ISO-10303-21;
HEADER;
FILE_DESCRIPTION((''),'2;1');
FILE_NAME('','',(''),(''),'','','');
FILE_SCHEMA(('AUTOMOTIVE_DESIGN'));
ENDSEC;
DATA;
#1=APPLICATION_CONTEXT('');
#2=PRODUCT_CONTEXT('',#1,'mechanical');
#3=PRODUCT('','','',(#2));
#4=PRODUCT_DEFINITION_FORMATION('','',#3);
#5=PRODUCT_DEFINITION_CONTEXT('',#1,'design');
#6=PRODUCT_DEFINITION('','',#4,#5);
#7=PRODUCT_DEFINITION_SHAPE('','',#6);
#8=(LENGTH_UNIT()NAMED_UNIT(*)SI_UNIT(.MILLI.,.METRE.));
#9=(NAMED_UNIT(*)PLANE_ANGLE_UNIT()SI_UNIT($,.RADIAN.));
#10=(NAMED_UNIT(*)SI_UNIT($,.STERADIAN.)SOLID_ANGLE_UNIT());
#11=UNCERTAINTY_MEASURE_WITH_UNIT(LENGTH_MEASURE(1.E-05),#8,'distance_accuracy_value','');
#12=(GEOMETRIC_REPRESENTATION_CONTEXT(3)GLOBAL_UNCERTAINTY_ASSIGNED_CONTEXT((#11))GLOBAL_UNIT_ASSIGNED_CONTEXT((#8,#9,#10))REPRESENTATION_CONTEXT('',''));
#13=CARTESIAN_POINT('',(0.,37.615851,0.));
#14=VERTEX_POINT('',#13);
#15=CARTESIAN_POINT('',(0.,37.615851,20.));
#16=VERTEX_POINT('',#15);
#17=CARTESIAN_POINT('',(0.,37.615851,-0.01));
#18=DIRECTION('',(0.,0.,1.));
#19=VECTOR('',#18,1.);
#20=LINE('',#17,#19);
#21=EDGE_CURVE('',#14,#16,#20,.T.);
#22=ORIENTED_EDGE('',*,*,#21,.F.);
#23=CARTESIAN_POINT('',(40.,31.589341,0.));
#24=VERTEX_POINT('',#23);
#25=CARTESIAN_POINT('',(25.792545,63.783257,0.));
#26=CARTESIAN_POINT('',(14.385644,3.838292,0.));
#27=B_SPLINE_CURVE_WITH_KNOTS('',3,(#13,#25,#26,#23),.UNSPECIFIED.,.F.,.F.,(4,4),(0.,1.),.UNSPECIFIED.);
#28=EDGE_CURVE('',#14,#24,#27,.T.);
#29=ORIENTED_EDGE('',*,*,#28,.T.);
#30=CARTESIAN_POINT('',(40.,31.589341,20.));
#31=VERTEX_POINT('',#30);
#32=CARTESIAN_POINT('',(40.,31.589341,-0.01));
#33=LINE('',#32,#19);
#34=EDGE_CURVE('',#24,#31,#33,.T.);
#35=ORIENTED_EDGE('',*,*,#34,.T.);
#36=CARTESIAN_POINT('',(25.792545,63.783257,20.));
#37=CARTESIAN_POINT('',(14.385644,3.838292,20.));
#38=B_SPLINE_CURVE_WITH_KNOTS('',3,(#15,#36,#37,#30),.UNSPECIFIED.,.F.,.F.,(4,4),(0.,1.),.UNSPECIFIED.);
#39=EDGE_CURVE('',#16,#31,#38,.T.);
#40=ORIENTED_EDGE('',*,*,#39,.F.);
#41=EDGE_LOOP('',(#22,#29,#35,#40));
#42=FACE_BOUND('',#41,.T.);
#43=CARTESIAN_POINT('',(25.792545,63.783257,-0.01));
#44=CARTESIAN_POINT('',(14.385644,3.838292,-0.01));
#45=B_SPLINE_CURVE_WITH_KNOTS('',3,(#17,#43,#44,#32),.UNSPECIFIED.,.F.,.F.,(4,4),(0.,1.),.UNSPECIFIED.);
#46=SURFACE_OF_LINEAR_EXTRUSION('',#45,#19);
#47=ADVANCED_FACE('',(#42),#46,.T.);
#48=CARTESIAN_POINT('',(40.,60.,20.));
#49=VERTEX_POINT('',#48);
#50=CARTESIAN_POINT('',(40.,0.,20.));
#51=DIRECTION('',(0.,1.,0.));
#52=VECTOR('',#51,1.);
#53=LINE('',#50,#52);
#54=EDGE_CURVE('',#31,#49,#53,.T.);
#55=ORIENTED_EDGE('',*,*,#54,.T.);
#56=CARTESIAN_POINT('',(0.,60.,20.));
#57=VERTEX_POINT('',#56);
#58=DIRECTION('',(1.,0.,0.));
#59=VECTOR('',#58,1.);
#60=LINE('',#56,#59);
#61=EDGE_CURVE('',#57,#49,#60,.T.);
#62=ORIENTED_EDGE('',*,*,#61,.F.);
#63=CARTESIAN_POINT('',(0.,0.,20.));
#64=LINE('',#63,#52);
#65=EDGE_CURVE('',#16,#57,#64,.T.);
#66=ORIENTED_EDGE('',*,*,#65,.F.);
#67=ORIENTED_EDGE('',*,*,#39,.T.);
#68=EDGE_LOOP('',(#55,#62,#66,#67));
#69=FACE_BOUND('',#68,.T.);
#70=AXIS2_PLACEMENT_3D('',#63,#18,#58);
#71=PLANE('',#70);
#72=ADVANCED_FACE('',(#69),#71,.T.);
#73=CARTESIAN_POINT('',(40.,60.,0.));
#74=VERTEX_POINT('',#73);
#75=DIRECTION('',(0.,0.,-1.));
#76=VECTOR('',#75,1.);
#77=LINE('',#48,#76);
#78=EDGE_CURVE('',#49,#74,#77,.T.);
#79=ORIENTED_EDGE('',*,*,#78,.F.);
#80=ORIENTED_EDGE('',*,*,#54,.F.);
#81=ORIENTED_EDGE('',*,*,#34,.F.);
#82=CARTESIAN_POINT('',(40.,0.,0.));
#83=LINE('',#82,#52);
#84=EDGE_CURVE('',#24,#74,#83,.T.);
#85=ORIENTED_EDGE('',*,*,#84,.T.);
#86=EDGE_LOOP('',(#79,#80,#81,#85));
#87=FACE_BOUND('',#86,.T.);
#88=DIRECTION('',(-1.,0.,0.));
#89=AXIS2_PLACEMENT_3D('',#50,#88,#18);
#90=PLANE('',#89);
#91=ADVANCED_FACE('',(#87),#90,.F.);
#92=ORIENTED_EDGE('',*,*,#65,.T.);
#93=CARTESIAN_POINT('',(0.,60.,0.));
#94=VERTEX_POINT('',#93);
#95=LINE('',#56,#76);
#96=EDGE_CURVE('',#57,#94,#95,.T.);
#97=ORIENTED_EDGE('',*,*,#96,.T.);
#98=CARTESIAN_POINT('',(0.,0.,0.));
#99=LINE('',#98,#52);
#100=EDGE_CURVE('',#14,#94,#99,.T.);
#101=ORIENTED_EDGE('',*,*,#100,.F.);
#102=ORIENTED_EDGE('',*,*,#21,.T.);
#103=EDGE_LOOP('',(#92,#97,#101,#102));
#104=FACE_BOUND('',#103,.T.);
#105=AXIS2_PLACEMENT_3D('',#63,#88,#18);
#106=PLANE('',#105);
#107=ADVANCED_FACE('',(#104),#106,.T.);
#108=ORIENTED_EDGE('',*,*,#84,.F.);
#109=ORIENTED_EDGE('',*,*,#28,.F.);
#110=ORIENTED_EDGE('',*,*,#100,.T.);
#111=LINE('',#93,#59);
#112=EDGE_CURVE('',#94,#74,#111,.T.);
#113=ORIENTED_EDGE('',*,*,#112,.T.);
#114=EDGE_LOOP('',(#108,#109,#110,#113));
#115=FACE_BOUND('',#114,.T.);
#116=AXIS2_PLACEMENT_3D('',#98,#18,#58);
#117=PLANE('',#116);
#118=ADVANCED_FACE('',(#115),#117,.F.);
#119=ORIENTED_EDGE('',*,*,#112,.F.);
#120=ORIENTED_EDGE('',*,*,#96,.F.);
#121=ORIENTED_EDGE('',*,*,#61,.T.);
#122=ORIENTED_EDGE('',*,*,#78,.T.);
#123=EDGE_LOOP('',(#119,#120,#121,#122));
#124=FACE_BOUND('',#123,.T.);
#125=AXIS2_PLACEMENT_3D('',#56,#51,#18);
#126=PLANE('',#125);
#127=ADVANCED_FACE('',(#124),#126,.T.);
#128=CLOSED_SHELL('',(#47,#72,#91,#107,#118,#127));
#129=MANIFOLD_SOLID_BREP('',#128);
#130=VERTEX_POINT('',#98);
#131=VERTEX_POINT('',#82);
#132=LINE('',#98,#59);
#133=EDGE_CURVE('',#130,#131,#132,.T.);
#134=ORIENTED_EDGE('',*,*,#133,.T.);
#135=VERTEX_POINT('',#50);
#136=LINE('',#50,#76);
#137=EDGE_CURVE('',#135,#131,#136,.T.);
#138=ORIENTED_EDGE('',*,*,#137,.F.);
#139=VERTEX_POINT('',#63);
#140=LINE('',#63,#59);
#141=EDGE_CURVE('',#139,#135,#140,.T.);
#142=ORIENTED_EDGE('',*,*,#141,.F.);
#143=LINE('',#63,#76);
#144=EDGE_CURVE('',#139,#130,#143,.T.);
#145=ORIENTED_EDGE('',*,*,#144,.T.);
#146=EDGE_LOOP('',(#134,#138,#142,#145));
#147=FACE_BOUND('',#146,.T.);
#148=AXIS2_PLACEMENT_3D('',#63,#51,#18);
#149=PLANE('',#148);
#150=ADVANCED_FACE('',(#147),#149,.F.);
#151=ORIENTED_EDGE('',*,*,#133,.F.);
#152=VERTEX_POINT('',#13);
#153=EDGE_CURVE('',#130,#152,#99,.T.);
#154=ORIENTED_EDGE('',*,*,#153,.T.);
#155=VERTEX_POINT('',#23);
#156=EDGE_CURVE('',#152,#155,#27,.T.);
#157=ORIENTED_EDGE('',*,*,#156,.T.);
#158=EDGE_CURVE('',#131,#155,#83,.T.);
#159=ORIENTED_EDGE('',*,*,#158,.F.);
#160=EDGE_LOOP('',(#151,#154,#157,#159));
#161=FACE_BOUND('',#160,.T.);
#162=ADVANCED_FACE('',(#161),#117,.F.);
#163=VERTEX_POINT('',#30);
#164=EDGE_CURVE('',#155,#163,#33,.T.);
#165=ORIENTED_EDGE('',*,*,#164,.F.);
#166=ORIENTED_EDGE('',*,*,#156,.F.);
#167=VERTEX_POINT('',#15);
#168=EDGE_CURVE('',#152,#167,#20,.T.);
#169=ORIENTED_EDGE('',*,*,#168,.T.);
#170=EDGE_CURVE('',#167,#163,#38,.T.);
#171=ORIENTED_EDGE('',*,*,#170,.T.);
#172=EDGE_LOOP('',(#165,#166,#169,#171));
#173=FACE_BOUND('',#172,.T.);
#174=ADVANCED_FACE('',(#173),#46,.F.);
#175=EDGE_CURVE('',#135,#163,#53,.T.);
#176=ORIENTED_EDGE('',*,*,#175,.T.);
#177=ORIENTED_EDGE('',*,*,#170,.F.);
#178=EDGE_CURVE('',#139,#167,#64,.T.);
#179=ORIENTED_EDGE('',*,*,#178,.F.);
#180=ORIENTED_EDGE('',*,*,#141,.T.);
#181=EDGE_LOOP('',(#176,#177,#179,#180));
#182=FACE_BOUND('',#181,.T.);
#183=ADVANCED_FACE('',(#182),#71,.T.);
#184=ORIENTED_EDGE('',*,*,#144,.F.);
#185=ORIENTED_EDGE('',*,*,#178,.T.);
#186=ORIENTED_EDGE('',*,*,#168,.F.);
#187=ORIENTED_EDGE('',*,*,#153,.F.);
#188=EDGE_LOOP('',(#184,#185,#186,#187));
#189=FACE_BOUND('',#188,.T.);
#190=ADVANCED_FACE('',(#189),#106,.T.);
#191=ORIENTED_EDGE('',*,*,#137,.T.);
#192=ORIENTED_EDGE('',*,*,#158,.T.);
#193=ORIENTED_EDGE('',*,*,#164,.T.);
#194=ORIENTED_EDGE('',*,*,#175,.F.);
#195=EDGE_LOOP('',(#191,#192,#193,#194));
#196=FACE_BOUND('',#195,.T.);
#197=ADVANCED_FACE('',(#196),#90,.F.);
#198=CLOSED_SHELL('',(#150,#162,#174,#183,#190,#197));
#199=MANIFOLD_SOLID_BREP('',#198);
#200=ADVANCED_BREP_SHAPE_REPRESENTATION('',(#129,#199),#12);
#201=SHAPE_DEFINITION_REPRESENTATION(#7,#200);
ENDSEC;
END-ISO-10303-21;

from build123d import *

# Parameters (mm, degrees)
SKETCH2_W           = 40
SKETCH2_H           = 60
BOSS_EXTRUDE1_DEPTH = 20
SPLIT1_DEPTH        = 20
SPLIT1_2_DEPTH      = 20


# Read off the part's stored shape, not the designer's step: Split1
with BuildPart() as part:
    # Sketch2 → Boss-Extrude1 (new body)
    with BuildSketch(Plane.XY):
        with Locations((20, 30)):
            Rectangle(SKETCH2_W, SKETCH2_H)
    extrude(amount=BOSS_EXTRUDE1_DEPTH)

    # Split1 2 outline → Split1 2 (cut)
    with BuildSketch(Plane.XY):
        with BuildLine():
            Line((0, 60), (0, 37.615851309))
            add(Edge.make_bspline(
                [(0, 37.615851309), (25.792545387, 63.78325659), (14.38564364, 3.838292105), (40, 31.589340599)],
                knots=[0, 0, 0, 0, 1, 1, 1, 1], degree=3))
            Line((40, 31.589340599), (40, 60))
            Line((40, 60), (0, 60))
        make_face()
    extrude(amount=SPLIT1_2_DEPTH, mode=Mode.SUBTRACT)


with BuildPart() as body_2:
    # Split1 outline → Split1 (new body)
    with BuildSketch(Plane.XY):
        with BuildLine():
            Line((0, 60), (0, 37.615851309))
            add(Edge.make_bspline(
                [(0, 37.615851309), (25.792545387, 63.78325659), (14.38564364, 3.838292105), (40, 31.589340599)],
                knots=[0, 0, 0, 0, 1, 1, 1, 1], degree=3))
            Line((40, 31.589340599), (40, 60))
            Line((40, 60), (0, 60))
        make_face()
    extrude(amount=SPLIT1_DEPTH)


solid = Compound([part.part, body_2.part])
